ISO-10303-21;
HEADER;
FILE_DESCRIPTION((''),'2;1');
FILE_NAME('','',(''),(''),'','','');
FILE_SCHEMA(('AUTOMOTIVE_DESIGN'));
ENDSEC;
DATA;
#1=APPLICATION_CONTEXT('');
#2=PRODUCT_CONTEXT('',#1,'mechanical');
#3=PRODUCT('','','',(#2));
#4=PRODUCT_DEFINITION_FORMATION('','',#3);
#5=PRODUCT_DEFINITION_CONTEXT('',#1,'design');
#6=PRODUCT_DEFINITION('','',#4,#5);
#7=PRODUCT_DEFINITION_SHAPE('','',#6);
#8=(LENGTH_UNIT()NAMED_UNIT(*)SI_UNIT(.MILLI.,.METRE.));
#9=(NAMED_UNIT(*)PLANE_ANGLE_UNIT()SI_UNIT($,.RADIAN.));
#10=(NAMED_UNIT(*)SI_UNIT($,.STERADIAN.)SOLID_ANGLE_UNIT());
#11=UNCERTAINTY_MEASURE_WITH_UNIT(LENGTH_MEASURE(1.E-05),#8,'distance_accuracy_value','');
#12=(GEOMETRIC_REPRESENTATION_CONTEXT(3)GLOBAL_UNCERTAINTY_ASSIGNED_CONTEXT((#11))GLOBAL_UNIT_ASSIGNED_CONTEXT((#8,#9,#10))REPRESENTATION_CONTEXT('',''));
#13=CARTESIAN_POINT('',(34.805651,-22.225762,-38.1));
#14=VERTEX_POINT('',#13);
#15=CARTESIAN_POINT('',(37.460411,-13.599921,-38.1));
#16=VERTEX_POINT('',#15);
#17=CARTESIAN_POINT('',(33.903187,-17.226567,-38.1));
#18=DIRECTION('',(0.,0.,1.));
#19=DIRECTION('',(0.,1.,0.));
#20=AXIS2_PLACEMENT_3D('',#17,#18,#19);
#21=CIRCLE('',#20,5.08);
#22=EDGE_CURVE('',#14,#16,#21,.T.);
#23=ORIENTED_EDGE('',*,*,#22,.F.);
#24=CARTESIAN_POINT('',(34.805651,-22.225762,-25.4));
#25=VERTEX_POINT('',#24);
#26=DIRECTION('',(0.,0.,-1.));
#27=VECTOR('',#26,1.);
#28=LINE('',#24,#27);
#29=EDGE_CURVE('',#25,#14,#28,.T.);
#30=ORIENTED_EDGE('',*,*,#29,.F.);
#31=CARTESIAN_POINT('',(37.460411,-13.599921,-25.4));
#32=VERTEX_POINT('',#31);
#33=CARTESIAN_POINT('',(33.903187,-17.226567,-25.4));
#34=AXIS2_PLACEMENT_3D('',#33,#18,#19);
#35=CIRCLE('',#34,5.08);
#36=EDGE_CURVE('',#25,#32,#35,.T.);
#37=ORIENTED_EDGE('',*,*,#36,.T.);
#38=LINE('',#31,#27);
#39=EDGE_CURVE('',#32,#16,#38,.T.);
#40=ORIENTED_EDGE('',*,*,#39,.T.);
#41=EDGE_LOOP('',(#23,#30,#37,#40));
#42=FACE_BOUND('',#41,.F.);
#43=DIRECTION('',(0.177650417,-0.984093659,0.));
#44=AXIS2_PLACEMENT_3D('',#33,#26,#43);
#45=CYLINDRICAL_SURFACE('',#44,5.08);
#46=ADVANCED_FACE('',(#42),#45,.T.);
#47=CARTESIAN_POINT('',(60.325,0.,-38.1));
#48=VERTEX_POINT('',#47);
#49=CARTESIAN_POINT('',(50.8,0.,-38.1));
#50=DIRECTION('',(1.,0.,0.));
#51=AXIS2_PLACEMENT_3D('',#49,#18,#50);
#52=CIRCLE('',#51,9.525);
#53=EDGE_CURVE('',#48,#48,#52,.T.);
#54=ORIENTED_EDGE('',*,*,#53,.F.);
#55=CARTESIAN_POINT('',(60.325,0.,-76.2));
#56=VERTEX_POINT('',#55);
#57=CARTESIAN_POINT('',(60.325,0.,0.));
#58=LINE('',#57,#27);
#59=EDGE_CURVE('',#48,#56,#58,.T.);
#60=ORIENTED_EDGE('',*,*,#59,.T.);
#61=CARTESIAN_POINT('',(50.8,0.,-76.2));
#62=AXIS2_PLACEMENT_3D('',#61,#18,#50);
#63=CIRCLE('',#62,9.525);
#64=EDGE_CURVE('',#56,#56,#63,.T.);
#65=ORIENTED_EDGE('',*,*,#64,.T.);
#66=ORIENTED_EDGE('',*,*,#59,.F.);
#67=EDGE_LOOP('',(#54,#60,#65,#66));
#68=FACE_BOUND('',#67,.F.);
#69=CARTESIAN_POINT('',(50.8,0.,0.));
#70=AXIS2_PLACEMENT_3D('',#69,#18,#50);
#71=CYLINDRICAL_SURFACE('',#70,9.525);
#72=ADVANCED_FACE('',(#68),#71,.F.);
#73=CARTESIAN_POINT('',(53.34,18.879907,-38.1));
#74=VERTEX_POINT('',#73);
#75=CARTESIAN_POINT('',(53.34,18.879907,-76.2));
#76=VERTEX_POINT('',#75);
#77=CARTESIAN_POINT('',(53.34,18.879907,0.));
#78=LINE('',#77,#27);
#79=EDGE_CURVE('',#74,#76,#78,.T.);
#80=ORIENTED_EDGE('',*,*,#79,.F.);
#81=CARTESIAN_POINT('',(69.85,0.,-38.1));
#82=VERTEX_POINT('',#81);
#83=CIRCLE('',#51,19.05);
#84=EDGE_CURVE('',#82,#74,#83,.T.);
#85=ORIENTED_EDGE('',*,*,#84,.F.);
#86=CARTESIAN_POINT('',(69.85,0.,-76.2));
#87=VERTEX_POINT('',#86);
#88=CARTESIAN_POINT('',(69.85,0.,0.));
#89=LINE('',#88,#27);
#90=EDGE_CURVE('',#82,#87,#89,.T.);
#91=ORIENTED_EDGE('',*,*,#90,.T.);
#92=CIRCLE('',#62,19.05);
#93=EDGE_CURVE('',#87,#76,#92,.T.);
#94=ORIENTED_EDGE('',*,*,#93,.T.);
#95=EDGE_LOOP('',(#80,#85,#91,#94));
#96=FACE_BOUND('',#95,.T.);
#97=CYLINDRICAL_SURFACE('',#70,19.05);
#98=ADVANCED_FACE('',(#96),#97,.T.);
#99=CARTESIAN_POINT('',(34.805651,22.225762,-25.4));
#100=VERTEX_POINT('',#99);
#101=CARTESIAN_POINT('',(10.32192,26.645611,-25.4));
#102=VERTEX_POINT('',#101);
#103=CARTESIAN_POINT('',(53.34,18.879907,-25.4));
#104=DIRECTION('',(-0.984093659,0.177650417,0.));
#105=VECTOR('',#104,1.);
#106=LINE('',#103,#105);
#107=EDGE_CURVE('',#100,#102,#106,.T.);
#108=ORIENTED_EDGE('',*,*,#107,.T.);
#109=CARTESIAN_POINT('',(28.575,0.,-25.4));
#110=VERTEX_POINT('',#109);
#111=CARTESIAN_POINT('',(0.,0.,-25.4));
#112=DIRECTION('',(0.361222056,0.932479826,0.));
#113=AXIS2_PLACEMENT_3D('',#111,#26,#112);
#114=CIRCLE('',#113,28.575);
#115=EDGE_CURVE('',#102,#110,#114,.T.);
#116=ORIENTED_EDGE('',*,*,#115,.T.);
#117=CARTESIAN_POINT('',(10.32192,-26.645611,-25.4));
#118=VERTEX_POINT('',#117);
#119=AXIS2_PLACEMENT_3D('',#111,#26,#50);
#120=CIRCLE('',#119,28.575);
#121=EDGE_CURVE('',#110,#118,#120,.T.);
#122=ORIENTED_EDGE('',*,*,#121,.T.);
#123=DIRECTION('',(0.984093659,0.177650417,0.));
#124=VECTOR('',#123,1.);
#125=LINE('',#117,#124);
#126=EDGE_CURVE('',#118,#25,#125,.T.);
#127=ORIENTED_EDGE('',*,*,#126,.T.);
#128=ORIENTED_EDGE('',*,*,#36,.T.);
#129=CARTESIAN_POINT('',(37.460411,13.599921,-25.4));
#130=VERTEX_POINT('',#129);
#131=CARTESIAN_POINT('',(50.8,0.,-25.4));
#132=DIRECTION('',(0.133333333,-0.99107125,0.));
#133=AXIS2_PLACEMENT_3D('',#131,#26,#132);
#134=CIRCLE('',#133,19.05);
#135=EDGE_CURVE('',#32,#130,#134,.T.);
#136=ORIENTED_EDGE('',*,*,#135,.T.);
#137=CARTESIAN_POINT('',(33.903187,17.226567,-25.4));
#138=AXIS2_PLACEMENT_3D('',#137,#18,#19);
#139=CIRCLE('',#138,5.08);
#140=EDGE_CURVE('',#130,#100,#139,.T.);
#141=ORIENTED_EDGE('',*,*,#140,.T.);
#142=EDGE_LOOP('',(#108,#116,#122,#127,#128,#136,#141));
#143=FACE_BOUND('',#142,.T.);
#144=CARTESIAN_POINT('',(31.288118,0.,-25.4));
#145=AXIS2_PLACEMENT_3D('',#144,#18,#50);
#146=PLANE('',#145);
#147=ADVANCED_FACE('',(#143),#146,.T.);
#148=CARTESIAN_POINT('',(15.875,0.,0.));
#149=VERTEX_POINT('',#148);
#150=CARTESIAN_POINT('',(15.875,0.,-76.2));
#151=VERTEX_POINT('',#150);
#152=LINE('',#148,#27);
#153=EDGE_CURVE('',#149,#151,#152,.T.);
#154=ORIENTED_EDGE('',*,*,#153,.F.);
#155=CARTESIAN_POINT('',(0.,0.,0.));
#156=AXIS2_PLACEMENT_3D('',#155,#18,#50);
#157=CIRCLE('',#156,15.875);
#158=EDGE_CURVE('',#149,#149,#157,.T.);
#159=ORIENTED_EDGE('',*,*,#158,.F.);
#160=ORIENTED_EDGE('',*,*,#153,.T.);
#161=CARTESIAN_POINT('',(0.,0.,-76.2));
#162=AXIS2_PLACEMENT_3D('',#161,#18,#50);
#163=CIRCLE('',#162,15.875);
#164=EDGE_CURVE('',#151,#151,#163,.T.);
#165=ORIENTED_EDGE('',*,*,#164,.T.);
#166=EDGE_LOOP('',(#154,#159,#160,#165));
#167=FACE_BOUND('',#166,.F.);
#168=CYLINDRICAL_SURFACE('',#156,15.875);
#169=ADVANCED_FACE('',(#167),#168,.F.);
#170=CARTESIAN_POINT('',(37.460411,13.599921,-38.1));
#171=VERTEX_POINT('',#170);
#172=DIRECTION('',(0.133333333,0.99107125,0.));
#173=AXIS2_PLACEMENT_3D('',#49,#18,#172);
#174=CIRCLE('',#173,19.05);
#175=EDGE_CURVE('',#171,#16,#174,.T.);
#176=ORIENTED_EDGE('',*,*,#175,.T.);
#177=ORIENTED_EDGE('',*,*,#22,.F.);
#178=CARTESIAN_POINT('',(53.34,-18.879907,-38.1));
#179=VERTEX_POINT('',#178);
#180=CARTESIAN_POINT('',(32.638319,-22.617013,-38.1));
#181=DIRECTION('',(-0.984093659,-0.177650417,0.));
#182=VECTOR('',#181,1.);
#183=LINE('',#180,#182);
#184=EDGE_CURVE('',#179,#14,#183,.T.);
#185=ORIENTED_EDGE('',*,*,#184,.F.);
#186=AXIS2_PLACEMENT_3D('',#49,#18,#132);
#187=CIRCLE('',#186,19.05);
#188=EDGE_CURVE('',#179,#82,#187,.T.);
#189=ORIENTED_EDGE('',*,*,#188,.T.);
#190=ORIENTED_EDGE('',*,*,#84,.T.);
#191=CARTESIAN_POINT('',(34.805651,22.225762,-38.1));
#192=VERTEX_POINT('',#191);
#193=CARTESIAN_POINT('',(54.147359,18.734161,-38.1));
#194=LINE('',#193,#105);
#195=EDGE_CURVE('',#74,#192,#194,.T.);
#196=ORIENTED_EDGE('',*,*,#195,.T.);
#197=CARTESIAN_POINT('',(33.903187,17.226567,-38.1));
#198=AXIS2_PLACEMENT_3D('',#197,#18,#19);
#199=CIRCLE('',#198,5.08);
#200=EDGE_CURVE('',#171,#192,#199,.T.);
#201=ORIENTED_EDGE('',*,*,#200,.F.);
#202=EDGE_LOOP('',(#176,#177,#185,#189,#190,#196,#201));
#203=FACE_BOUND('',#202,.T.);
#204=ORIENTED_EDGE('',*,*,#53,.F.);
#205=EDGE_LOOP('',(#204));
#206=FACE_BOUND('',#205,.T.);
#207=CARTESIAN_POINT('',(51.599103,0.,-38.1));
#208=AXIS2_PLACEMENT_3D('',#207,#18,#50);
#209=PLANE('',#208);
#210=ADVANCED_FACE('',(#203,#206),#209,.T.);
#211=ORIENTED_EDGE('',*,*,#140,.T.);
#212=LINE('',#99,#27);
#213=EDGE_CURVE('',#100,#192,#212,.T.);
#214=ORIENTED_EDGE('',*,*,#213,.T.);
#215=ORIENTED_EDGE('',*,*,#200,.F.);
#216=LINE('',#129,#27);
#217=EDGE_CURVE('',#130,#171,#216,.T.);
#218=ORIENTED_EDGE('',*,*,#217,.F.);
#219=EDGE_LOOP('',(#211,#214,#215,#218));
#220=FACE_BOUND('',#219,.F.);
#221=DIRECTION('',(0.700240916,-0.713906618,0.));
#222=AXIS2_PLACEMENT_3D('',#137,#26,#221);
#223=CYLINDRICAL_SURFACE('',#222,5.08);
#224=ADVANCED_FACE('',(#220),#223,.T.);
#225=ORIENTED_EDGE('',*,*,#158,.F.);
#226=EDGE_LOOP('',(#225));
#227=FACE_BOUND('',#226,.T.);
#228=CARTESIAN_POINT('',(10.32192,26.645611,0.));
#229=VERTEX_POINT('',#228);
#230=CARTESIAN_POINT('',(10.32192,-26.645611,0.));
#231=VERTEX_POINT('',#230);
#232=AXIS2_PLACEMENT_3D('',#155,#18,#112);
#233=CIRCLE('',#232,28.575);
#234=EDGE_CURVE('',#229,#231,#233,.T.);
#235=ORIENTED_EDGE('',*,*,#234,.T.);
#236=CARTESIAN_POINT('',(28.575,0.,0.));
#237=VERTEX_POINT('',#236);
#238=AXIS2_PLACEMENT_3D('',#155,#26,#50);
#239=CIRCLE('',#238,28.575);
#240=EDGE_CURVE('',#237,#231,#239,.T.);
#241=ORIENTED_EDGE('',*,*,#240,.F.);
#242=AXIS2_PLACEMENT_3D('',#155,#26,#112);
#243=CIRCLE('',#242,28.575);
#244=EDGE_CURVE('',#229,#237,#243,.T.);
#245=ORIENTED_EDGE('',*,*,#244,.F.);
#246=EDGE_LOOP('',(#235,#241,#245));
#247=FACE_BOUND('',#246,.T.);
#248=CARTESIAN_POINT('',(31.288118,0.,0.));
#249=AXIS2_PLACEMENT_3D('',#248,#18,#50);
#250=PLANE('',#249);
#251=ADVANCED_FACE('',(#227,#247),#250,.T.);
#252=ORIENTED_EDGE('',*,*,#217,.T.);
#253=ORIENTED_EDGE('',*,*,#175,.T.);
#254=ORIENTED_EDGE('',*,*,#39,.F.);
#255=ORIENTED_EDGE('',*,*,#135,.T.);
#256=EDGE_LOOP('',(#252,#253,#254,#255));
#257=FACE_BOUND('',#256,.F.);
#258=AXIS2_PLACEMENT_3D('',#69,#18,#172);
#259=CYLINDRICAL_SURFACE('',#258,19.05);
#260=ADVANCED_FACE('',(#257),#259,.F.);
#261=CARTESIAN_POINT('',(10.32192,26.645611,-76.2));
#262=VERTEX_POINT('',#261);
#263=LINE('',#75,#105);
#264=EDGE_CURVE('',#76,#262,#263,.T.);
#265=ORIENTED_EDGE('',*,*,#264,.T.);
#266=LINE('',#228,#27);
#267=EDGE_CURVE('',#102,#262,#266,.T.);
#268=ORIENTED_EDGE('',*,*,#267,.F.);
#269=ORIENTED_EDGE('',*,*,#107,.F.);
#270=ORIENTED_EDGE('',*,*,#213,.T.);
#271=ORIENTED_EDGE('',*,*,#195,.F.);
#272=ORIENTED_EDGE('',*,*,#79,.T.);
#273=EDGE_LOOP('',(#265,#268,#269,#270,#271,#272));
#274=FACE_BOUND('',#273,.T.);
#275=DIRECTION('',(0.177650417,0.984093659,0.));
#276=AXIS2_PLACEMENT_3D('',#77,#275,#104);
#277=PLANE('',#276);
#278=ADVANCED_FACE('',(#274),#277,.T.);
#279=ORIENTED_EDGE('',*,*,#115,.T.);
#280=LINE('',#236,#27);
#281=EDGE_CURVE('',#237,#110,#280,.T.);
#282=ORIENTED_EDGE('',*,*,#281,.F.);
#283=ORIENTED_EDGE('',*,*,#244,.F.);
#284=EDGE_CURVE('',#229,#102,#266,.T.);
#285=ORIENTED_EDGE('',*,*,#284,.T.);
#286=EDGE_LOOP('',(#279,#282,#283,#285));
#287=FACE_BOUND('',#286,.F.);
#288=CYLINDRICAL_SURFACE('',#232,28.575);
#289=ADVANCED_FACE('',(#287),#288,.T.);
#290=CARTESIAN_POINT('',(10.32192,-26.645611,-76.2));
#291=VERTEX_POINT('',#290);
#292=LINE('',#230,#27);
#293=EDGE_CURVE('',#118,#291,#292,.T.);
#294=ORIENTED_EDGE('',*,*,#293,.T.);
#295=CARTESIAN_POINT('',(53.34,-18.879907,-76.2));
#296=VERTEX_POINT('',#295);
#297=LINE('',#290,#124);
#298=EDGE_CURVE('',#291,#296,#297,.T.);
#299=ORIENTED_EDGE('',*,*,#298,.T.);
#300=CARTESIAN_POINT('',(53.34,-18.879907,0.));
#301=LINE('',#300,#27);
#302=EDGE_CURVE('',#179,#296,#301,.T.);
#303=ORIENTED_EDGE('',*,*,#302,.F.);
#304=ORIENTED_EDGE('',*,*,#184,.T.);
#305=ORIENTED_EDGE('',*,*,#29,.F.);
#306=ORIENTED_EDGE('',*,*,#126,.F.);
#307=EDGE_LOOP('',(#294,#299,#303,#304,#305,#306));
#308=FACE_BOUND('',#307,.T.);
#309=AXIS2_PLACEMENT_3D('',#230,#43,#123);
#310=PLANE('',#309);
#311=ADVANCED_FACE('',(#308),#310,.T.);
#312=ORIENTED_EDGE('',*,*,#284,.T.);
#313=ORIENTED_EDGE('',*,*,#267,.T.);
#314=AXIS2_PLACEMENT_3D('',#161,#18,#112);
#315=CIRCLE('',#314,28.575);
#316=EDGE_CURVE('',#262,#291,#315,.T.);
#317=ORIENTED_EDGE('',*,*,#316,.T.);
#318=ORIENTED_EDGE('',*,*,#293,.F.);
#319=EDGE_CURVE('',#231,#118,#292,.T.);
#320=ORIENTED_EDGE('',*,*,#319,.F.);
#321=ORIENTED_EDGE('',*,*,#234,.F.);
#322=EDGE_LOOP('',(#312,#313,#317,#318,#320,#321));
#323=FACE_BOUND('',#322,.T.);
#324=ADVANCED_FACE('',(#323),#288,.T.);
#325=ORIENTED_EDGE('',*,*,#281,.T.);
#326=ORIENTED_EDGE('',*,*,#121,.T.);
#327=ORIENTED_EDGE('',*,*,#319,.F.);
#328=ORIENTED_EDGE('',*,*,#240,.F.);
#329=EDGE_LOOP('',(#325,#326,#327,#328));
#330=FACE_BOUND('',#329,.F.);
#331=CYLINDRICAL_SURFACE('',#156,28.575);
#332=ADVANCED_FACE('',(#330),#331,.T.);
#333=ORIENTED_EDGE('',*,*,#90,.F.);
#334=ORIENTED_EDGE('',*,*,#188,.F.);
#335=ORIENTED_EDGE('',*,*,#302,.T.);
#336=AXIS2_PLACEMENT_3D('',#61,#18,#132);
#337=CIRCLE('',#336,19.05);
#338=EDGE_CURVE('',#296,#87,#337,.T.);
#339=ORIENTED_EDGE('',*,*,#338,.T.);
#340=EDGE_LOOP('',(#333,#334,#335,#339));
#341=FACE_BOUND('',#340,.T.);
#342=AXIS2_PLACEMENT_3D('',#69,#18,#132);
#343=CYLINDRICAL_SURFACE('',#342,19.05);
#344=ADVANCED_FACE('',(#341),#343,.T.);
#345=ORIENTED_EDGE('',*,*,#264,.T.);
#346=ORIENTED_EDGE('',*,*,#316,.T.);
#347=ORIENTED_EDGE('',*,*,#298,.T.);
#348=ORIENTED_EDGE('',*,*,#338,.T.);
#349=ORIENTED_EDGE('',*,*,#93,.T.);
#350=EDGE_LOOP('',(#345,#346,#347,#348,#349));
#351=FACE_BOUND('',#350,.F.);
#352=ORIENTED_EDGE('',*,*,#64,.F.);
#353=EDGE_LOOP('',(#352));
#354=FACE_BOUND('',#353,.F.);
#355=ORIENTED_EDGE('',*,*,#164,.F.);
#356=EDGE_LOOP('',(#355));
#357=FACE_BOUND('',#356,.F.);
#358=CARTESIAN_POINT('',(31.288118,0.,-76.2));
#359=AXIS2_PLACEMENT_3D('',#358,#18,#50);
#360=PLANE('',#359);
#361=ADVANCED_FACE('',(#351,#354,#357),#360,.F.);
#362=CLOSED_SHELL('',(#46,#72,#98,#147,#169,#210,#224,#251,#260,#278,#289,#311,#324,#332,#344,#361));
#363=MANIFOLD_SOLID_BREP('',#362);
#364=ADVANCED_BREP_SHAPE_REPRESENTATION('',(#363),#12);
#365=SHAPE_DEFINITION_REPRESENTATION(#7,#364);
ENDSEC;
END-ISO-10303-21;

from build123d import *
from build123d import SkipClean  # not in build123d's __all__

# Parameters (mm, degrees)
F0_R     = 15.875
F0_R_2   = 9.525
F1_DEPTH = 76.2
F2_DEPTH = 38.1
F3_DEPTH = 25.4
F4_R     = 5.08


with BuildPart() as f1:
    # F0 (on Top) → F1 (new body)
    with BuildSketch(Plane.XY):
        with BuildLine():
            ThreePointArc((10.3219202517, 26.6456110329), (23.5741330296, 16.1490209271), (28.575, 0))
            ThreePointArc((28.575, 0), (23.5741330296, -16.1490209271), (10.3219202517, -26.6456110329))
            Line((10.3219202517, -26.6456110329), (53.34, -18.8799073091))
            ThreePointArc((53.34, -18.8799073091), (31.75, 0), (53.34, 18.8799073091))
            Line((53.34, 18.8799073091), (10.3219202517, 26.6456110329))
        make_face()
        with BuildLine():
            ThreePointArc((10.3219202517, -26.6456110329), (23.5741330296, -16.1490209271), (28.575, 0))
            ThreePointArc((28.575, 0), (23.5741330296, 16.1490209271), (10.3219202517, 26.6456110329))
            ThreePointArc((10.3219202517, 26.6456110329), (-28.575, 0), (10.3219202517, -26.6456110329))
        make_face()
        Circle(F0_R, mode=Mode.SUBTRACT)
        with BuildLine():
            ThreePointArc((69.85, 0), (65.1403190341, 12.5402452129), (53.34, 18.8799073091))
            ThreePointArc((53.34, 18.8799073091), (31.75, 0), (53.34, -18.8799073091))
            ThreePointArc((53.34, -18.8799073091), (65.1403190341, -12.5402452129), (69.85, 0))
        make_face()
        with Locations((50.8, 0)):
            Circle(F0_R_2, mode=Mode.SUBTRACT)
    extrude(amount=-F1_DEPTH)

    # F0 (on Top) → F2 (cut)
    with BuildSketch(Plane.XY):
        with BuildLine():
            ThreePointArc((69.85, 0), (65.1403190341, 12.5402452129), (53.34, 18.8799073091))
            ThreePointArc((53.34, 18.8799073091), (31.75, 0), (53.34, -18.8799073091))
            ThreePointArc((53.34, -18.8799073091), (65.1403190341, -12.5402452129), (69.85, 0))
        make_face()
        with Locations((50.8, 0)):
            Circle(F0_R_2, mode=Mode.SUBTRACT)
    extrude(amount=-F2_DEPTH, mode=Mode.SUBTRACT)

    # F0 (on Top) → F3 (cut)
    with BuildSketch(Plane.XY):
        with BuildLine():
            ThreePointArc((10.3219202517, 26.6456110329), (23.5741330296, 16.1490209271), (28.575, 0))
            ThreePointArc((28.575, 0), (23.5741330296, -16.1490209271), (10.3219202517, -26.6456110329))
            Line((10.3219202517, -26.6456110329), (53.34, -18.8799073091))
            ThreePointArc((53.34, -18.8799073091), (31.75, 0), (53.34, 18.8799073091))
            Line((53.34, 18.8799073091), (10.3219202517, 26.6456110329))
        make_face()
    with SkipClean():  # cleaning this boolean's faces spoils the solid; the shape is the same uncleaned
        extrude(amount=-F3_DEPTH, mode=Mode.SUBTRACT)

    # F4
    f4_edges = [f1.edges().sort_by_distance(p)[0] for p in [
        (53.34, -18.879907, -31.75),
        (53.34, -18.879907, -57.15),
        (53.34, 18.879907, -31.75),
        (53.34, 18.879907, -57.15),
    ]]
    fillet(f4_edges, radius=F4_R)


solid = f1.part
